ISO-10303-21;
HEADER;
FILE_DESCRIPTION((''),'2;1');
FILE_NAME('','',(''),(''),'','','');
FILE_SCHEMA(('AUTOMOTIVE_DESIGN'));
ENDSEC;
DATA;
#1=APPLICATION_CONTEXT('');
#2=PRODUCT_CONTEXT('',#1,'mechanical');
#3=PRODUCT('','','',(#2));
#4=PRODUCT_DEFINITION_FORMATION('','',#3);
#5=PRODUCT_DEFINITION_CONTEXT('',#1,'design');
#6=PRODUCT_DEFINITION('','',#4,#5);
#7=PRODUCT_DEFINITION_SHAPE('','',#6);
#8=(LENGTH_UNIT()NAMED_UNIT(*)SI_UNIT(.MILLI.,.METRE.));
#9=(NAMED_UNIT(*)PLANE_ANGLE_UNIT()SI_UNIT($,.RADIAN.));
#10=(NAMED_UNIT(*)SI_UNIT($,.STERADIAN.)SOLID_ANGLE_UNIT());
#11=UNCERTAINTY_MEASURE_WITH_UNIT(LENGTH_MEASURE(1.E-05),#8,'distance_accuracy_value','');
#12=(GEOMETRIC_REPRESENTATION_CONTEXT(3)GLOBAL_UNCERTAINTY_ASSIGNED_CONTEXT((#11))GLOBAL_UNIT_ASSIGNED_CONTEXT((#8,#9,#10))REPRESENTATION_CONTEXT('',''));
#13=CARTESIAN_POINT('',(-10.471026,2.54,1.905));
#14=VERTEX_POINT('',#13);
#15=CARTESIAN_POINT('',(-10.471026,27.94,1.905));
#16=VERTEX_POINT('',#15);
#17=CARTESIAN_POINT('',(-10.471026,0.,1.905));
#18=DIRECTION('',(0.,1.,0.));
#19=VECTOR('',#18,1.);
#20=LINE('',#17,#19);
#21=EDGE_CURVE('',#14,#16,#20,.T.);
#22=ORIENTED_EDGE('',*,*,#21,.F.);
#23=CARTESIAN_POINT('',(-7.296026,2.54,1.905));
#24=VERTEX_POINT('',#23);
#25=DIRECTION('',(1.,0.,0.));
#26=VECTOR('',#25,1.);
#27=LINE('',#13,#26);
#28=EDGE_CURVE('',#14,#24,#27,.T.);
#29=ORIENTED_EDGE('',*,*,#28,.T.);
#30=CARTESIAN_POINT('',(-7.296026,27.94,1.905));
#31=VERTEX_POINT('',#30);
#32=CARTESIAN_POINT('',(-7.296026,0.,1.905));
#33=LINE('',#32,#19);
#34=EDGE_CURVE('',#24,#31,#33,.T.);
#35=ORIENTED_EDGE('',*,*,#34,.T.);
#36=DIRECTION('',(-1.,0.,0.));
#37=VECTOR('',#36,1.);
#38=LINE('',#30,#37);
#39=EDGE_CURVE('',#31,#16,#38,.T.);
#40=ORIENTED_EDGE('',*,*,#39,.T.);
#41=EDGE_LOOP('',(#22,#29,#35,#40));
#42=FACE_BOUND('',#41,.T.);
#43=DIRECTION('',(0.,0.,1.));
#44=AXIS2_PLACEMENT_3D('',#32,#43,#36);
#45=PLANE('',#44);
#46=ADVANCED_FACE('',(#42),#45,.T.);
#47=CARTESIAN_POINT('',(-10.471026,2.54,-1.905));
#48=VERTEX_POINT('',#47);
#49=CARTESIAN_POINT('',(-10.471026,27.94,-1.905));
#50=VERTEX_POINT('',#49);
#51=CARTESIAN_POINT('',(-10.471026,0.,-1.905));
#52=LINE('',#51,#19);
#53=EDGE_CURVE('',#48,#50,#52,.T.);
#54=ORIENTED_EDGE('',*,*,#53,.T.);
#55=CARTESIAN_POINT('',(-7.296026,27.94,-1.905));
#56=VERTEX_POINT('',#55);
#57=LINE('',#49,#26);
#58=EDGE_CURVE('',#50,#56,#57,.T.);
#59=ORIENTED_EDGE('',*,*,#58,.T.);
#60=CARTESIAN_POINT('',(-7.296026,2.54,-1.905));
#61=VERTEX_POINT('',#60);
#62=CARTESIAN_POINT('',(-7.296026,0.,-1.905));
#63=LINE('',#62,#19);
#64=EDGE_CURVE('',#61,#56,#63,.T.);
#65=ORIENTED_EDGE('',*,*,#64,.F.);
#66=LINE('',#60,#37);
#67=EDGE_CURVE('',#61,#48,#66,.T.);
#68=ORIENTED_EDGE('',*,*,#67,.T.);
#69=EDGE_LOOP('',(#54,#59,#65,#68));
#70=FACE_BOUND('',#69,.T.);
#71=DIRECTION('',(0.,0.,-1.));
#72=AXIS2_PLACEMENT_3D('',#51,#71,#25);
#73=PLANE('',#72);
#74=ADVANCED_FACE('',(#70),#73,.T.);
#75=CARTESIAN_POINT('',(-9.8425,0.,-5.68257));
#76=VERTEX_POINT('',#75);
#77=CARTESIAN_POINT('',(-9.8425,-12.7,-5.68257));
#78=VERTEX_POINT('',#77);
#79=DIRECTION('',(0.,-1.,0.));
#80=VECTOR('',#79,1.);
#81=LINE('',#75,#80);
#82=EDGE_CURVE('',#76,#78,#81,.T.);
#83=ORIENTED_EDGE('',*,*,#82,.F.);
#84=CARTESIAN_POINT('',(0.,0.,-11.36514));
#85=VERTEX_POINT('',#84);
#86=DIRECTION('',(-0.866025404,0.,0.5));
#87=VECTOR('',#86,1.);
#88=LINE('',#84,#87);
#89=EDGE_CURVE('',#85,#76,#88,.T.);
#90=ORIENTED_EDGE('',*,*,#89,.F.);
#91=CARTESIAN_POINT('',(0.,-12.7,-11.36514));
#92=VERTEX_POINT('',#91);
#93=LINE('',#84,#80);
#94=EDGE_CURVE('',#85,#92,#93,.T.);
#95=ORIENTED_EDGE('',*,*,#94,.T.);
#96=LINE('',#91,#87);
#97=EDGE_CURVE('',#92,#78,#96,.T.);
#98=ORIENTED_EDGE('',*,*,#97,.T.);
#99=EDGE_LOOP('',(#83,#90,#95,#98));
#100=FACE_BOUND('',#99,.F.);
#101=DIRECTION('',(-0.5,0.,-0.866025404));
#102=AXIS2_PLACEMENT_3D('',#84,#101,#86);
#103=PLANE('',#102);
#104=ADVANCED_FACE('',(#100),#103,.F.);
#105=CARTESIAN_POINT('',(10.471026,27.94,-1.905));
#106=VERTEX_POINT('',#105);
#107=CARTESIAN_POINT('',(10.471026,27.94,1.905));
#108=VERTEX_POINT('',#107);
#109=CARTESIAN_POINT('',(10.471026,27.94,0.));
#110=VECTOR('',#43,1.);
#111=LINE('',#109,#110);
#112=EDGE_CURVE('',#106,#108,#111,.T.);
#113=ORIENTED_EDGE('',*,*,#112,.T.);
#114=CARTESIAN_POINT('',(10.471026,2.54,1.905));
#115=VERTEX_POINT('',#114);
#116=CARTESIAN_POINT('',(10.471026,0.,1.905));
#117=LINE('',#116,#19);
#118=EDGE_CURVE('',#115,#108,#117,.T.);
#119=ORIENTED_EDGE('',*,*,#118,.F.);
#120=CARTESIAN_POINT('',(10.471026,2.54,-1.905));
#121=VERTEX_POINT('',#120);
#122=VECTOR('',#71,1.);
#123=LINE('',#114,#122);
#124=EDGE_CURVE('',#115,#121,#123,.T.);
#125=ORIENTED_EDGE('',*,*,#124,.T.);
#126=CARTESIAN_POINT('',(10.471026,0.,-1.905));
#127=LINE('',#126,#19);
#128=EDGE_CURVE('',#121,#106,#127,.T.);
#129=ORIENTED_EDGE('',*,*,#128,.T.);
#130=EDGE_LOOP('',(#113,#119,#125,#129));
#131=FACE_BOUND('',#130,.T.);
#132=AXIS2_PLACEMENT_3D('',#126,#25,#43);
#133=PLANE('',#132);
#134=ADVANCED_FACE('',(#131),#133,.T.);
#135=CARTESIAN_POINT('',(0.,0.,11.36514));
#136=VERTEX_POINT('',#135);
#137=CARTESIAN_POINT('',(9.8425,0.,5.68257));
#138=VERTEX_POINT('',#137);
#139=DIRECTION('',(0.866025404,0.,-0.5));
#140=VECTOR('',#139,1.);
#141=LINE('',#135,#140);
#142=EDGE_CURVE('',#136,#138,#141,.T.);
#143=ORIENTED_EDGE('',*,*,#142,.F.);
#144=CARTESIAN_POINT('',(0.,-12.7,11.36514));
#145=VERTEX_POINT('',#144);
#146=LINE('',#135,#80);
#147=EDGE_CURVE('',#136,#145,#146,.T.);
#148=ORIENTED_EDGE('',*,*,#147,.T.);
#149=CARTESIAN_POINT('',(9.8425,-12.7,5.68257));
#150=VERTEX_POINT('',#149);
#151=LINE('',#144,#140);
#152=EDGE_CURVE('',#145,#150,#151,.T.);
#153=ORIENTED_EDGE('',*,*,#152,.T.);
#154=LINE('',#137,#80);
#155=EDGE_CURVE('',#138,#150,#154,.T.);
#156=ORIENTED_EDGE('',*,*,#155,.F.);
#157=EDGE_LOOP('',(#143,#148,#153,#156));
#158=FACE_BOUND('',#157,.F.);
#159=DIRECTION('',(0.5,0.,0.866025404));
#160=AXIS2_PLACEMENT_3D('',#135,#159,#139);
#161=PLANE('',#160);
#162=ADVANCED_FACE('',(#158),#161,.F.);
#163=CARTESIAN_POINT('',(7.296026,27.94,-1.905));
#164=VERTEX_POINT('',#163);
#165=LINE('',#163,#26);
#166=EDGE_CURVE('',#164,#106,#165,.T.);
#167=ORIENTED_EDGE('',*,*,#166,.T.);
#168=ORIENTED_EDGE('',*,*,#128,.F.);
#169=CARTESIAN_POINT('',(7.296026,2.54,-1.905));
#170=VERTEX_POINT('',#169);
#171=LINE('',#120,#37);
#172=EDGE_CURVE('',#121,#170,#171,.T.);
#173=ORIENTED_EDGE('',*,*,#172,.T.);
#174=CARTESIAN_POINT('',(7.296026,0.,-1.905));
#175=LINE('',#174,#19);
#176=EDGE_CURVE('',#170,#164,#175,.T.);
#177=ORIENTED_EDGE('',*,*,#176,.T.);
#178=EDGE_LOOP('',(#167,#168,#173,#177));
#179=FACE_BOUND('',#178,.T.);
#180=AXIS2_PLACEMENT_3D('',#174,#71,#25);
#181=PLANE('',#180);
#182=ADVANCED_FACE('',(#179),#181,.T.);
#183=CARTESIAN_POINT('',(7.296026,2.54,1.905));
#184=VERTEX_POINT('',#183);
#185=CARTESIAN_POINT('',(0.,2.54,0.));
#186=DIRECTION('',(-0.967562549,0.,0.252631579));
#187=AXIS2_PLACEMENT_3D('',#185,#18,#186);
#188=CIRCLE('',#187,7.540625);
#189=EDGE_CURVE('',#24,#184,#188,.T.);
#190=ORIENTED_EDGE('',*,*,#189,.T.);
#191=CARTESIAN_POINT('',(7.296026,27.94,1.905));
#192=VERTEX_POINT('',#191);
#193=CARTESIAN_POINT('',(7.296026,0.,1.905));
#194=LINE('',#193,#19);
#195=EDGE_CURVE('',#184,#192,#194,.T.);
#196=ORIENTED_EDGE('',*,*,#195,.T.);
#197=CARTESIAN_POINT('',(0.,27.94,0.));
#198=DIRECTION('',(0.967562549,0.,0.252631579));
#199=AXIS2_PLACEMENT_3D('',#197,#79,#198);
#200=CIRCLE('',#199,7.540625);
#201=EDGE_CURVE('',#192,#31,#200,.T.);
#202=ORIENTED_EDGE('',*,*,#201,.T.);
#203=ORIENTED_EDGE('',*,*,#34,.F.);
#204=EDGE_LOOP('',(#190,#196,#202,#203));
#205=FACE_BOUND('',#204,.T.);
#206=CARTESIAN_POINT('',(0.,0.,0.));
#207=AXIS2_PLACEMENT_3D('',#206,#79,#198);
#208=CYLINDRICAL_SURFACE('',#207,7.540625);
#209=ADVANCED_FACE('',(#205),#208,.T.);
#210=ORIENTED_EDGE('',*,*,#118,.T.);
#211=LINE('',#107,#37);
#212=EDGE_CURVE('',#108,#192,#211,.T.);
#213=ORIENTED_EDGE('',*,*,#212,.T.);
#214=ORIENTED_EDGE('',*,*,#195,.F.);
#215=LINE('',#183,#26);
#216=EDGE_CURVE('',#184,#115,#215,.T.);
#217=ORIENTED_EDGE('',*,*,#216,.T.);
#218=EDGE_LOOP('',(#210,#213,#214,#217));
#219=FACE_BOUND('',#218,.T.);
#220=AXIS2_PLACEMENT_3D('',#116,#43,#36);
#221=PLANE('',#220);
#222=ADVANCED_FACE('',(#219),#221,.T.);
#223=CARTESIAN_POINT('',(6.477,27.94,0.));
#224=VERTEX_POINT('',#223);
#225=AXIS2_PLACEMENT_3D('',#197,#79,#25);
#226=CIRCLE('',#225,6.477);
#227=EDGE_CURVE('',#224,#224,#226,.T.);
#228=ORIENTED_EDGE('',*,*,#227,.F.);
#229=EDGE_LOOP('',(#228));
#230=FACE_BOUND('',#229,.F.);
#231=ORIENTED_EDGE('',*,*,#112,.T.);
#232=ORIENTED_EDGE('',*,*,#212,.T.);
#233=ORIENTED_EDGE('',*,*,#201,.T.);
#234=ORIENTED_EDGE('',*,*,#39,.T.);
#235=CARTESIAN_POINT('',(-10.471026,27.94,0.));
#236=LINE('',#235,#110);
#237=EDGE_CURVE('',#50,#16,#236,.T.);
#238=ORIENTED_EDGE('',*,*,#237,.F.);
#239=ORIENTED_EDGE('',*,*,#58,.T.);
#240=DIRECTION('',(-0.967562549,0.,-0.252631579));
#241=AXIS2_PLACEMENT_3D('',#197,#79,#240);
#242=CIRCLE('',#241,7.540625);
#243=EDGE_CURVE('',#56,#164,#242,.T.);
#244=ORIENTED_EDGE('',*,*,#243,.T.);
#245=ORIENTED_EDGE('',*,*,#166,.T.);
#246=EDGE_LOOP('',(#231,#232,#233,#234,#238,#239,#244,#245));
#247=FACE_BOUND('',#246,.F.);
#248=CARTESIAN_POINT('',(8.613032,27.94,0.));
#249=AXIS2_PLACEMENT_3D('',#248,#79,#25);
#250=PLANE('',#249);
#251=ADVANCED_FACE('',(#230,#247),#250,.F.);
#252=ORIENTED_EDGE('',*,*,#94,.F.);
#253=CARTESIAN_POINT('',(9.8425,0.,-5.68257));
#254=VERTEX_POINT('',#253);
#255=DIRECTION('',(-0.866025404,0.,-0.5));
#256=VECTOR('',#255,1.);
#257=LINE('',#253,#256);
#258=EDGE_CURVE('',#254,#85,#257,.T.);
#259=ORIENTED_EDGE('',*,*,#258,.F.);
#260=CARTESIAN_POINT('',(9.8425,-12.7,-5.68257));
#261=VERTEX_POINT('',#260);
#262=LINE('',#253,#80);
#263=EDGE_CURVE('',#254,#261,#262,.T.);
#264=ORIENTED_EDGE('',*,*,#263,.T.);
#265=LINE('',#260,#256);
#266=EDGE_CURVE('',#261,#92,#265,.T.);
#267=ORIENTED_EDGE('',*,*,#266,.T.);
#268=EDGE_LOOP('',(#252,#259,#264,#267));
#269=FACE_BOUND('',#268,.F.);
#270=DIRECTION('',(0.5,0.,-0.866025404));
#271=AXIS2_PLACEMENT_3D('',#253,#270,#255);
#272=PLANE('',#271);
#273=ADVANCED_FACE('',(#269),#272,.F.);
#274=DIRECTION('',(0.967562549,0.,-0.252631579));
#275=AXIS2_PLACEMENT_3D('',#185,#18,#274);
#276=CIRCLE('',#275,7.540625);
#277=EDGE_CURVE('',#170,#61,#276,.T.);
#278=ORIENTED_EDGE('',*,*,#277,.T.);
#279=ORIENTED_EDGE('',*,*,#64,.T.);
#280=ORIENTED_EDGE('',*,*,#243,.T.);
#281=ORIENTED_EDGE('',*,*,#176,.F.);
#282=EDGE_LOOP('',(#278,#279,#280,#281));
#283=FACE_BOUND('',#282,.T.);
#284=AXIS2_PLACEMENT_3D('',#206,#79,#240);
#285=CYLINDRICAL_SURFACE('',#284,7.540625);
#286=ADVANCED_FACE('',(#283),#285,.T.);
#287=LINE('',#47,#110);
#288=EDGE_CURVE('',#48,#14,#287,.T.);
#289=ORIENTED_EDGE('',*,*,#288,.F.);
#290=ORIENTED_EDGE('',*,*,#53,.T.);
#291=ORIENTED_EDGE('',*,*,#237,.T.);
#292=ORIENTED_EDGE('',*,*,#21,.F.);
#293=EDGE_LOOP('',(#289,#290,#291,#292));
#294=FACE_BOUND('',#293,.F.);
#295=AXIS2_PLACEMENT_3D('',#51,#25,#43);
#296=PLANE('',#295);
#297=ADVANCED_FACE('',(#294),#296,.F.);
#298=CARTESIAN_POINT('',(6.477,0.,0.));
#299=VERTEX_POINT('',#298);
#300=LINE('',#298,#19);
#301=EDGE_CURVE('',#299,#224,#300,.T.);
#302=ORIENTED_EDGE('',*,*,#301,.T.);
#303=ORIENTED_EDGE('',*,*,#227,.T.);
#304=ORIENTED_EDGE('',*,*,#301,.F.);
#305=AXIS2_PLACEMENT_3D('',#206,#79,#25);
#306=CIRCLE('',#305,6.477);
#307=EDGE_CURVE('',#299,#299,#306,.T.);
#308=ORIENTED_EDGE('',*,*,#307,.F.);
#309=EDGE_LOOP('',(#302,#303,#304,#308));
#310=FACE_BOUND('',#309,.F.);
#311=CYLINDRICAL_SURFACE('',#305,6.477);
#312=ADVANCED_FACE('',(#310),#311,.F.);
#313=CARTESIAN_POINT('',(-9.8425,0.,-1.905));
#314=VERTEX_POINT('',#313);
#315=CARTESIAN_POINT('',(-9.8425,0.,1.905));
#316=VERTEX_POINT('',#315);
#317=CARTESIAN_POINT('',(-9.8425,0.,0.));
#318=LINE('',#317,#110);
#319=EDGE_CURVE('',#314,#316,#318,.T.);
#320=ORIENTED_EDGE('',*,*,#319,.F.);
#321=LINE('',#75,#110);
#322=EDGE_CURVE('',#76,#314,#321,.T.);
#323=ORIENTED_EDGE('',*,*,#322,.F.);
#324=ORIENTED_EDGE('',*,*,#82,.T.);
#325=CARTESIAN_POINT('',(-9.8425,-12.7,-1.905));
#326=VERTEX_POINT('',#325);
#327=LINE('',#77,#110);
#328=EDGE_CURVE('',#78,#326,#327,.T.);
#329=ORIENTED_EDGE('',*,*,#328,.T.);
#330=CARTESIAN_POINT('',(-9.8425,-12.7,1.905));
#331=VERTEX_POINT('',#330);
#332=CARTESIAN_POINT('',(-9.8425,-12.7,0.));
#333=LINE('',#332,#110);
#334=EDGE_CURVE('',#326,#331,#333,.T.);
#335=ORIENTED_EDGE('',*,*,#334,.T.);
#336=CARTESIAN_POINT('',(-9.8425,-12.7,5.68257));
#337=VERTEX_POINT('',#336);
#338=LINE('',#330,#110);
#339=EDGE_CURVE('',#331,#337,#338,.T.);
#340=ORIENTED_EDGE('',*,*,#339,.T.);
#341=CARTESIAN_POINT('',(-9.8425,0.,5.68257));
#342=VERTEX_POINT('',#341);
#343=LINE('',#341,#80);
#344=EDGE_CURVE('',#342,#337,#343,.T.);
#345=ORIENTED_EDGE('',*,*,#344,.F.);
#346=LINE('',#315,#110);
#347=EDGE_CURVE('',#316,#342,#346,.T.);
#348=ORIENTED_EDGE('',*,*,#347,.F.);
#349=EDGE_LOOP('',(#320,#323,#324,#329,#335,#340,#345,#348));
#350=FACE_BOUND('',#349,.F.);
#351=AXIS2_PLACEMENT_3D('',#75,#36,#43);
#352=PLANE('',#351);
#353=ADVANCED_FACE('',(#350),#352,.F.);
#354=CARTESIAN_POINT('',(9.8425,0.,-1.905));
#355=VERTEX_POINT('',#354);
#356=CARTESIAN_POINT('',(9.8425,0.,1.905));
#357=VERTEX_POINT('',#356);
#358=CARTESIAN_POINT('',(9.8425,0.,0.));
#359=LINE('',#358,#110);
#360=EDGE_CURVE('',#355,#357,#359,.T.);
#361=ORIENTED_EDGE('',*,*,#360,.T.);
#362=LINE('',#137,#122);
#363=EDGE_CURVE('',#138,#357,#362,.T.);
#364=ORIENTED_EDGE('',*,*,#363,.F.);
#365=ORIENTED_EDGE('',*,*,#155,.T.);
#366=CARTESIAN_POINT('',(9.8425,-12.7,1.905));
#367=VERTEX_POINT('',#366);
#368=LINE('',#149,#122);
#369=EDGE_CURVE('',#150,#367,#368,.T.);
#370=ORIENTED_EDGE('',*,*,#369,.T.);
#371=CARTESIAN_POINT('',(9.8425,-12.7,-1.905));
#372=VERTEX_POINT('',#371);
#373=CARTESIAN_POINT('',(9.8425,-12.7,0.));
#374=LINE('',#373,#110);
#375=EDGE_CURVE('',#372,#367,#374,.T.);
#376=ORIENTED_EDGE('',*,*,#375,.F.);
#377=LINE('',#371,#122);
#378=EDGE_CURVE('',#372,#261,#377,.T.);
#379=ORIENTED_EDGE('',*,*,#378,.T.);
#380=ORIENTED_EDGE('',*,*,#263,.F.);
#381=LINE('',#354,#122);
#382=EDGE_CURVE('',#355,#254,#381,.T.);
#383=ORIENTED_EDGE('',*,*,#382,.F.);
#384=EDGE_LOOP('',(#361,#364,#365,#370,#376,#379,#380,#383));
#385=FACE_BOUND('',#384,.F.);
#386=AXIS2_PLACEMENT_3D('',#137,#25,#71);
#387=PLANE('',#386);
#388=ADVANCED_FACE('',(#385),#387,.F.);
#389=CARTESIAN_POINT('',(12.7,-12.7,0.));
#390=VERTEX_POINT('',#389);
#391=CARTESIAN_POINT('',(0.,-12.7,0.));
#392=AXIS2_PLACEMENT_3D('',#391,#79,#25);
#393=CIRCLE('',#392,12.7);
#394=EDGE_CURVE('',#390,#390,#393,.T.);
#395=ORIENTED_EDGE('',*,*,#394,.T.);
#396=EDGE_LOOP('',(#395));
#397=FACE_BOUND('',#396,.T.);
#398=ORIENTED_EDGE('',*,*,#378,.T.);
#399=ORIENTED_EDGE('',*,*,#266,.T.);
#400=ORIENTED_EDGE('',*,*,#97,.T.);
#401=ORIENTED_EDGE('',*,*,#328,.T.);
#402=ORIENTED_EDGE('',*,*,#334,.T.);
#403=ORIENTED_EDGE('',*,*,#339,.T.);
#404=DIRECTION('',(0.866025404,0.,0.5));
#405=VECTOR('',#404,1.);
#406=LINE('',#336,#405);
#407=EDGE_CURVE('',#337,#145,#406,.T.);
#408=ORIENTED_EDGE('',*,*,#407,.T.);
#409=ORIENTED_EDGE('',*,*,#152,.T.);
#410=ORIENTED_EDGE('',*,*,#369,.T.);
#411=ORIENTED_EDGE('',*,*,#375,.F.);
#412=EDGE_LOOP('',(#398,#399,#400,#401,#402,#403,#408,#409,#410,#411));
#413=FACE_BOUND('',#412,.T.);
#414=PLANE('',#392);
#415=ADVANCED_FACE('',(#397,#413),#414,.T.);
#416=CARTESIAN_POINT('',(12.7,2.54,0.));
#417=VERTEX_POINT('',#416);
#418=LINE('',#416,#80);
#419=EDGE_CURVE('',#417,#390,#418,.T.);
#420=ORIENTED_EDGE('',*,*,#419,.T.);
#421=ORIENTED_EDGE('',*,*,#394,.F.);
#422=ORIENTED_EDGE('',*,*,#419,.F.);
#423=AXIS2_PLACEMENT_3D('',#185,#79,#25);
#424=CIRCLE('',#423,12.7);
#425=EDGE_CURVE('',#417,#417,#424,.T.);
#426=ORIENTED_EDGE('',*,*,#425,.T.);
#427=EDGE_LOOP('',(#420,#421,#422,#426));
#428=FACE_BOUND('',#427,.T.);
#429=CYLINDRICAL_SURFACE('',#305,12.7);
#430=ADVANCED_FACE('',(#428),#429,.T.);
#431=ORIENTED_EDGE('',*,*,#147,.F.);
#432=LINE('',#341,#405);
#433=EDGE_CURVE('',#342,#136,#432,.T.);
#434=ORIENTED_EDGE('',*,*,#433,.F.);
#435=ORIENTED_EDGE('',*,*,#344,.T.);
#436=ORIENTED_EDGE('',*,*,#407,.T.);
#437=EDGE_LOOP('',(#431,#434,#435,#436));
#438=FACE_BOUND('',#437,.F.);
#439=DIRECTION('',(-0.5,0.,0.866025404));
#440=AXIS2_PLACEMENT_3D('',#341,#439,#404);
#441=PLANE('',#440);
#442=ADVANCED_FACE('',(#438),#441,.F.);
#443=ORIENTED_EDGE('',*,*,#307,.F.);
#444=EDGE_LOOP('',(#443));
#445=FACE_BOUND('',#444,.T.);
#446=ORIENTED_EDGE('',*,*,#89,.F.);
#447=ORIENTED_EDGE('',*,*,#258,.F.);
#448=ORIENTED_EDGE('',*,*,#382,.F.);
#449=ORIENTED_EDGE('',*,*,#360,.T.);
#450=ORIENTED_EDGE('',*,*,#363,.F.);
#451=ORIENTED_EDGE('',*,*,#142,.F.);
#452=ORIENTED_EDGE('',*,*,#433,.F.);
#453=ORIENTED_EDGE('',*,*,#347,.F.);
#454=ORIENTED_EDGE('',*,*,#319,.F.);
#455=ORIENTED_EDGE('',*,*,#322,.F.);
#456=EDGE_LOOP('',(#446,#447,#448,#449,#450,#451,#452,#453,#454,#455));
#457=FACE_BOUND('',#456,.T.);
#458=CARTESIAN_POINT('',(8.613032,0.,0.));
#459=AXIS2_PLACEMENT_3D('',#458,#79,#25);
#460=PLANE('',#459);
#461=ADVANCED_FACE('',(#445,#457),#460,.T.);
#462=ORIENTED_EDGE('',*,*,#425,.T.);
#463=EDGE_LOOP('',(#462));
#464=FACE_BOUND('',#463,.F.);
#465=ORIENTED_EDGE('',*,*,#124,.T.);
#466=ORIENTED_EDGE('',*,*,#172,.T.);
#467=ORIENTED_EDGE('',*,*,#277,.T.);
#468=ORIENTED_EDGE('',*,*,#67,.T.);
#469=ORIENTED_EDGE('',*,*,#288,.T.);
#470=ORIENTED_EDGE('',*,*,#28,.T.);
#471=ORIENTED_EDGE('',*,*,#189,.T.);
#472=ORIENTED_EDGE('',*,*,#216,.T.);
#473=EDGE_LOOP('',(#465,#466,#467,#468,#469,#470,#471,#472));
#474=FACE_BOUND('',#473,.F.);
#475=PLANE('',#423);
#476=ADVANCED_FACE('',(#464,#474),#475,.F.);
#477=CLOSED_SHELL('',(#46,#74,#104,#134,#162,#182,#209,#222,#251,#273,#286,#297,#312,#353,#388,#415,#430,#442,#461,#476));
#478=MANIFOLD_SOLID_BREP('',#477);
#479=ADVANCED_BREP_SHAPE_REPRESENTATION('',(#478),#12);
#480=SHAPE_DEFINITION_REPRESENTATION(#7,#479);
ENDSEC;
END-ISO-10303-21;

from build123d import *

# Parameters (mm, degrees)
F0_R     = 12.7
F0_W     = 0.6285263425
F0_H     = 3.81
F1_DEPTH = 12.7
F2_DEPTH = 2.54
F0_R_2   = 6.477
F3_DEPTH = 27.94


# Not quite as in the source:
# - a feature names something its author has since deleted; it is built from what else it names


with BuildPart() as f1:
    # F0 (on Front) → F1 (new body)
    with BuildSketch(Plane.XZ):
        Circle(F0_R)
        Polygon((9.8425, 5.6825700245), (9.8425, 1.905), (10.4710263425, 1.905), (10.4710263425, -1.905), (9.8425, -1.905), (9.8425, -5.6825700245), (0, -11.365140049), (-9.8425, -5.6825700245), (-9.8425, -1.905), (-10.4710263425, -1.905), (-10.4710263425, 1.905), (-9.8425, 1.905), (-9.8425, 5.6825700245), (0, 11.365140049), align=None, mode=Mode.SUBTRACT)
        with Locations((10.1567631713, 0)):
            Rectangle(F0_W, F0_H)
        with Locations((-10.1567631713, 0)):
            Rectangle(F0_W, F0_H)
    extrude(amount=F1_DEPTH)

    # F0 (on Front) → F2 (join)
    with BuildSketch(Plane.XZ):
        Circle(F0_R)
        Polygon((9.8425, 5.6825700245), (9.8425, 1.905), (10.4710263425, 1.905), (10.4710263425, -1.905), (9.8425, -1.905), (9.8425, -5.6825700245), (0, -11.365140049), (-9.8425, -5.6825700245), (-9.8425, -1.905), (-10.4710263425, -1.905), (-10.4710263425, 1.905), (-9.8425, 1.905), (-9.8425, 5.6825700245), (0, 11.365140049), align=None, mode=Mode.SUBTRACT)
        with BuildLine():
            ThreePointArc((-7.2960263425, 1.905), (0, 7.540625), (7.2960263425, 1.905))
            Line((7.2960263425, 1.905), (9.8425, 1.905))
            Line((9.8425, 1.905), (9.8425, 5.6825700245))
            Line((9.8425, 5.6825700245), (0, 11.365140049))
            Line((0, 11.365140049), (-9.8425, 5.6825700245))
            Line((-9.8425, 5.6825700245), (-9.8425, 1.905))
            Line((-9.8425, 1.905), (-7.2960263425, 1.905))
        make_face()
        with BuildLine():
            Line((9.8425, -1.905), (7.2960263425, -1.905))
            ThreePointArc((7.2960263425, -1.905), (0, -7.540625), (-7.2960263425, -1.905))
            Line((-7.2960263425, -1.905), (-9.8425, -1.905))
            Line((-9.8425, -1.905), (-9.8425, -5.6825700245))
            Line((-9.8425, -5.6825700245), (0, -11.365140049))
            Line((0, -11.365140049), (9.8425, -5.6825700245))
            Line((9.8425, -5.6825700245), (9.8425, -1.905))
        make_face()
    extrude(amount=-F2_DEPTH)

    # F0 (on Front) → F3 (join)
    with BuildSketch(Plane.XZ):
        with BuildLine():
            ThreePointArc((7.2960263425, 1.905), (7.4792253619, 0.9603194134), (7.540625, 0))
            ThreePointArc((7.540625, 0), (7.4792253619, -0.9603194134), (7.2960263425, -1.905))
            Line((7.2960263425, -1.905), (9.8425, -1.905))
            Line((9.8425, -1.905), (9.8425, 1.905))
            Line((9.8425, 1.905), (7.2960263425, 1.905))
        make_face()
        with BuildLine():
            ThreePointArc((7.2960263425, -1.905), (7.4792253619, -0.9603194134), (7.540625, 0))
            ThreePointArc((7.540625, 0), (7.4792253619, 0.9603194134), (7.2960263425, 1.905))
            Line((7.2960263425, 1.905), (7.2960263425, -1.905))
        make_face()
        with BuildLine():
            Line((7.2960263425, -1.905), (7.2960263425, 1.905))
            ThreePointArc((7.2960263425, 1.905), (0, 7.540625), (-7.2960263425, 1.905))
            Line((-7.2960263425, 1.905), (-7.2960263425, -1.905))
            ThreePointArc((-7.2960263425, -1.905), (0, -7.540625), (7.2960263425, -1.905))
        make_face()
        Circle(F0_R_2, mode=Mode.SUBTRACT)
        with BuildLine():
            Line((-7.2960263425, -1.905), (-7.2960263425, 1.905))
            ThreePointArc((-7.2960263425, 1.905), (-7.540625, 0), (-7.2960263425, -1.905))
        make_face()
        with BuildLine():
            ThreePointArc((-7.2960263425, -1.905), (-7.540625, 0), (-7.2960263425, 1.905))
            Line((-7.2960263425, 1.905), (-9.8425, 1.905))
            Line((-9.8425, 1.905), (-9.8425, -1.905))
            Line((-9.8425, -1.905), (-7.2960263425, -1.905))
        make_face()
        with Locations((10.1567631713, 0)):
            Rectangle(F0_W, F0_H)
        with Locations((-10.1567631713, 0)):
            Rectangle(F0_W, F0_H)
    extrude(amount=-F3_DEPTH)


solid = f1.part
